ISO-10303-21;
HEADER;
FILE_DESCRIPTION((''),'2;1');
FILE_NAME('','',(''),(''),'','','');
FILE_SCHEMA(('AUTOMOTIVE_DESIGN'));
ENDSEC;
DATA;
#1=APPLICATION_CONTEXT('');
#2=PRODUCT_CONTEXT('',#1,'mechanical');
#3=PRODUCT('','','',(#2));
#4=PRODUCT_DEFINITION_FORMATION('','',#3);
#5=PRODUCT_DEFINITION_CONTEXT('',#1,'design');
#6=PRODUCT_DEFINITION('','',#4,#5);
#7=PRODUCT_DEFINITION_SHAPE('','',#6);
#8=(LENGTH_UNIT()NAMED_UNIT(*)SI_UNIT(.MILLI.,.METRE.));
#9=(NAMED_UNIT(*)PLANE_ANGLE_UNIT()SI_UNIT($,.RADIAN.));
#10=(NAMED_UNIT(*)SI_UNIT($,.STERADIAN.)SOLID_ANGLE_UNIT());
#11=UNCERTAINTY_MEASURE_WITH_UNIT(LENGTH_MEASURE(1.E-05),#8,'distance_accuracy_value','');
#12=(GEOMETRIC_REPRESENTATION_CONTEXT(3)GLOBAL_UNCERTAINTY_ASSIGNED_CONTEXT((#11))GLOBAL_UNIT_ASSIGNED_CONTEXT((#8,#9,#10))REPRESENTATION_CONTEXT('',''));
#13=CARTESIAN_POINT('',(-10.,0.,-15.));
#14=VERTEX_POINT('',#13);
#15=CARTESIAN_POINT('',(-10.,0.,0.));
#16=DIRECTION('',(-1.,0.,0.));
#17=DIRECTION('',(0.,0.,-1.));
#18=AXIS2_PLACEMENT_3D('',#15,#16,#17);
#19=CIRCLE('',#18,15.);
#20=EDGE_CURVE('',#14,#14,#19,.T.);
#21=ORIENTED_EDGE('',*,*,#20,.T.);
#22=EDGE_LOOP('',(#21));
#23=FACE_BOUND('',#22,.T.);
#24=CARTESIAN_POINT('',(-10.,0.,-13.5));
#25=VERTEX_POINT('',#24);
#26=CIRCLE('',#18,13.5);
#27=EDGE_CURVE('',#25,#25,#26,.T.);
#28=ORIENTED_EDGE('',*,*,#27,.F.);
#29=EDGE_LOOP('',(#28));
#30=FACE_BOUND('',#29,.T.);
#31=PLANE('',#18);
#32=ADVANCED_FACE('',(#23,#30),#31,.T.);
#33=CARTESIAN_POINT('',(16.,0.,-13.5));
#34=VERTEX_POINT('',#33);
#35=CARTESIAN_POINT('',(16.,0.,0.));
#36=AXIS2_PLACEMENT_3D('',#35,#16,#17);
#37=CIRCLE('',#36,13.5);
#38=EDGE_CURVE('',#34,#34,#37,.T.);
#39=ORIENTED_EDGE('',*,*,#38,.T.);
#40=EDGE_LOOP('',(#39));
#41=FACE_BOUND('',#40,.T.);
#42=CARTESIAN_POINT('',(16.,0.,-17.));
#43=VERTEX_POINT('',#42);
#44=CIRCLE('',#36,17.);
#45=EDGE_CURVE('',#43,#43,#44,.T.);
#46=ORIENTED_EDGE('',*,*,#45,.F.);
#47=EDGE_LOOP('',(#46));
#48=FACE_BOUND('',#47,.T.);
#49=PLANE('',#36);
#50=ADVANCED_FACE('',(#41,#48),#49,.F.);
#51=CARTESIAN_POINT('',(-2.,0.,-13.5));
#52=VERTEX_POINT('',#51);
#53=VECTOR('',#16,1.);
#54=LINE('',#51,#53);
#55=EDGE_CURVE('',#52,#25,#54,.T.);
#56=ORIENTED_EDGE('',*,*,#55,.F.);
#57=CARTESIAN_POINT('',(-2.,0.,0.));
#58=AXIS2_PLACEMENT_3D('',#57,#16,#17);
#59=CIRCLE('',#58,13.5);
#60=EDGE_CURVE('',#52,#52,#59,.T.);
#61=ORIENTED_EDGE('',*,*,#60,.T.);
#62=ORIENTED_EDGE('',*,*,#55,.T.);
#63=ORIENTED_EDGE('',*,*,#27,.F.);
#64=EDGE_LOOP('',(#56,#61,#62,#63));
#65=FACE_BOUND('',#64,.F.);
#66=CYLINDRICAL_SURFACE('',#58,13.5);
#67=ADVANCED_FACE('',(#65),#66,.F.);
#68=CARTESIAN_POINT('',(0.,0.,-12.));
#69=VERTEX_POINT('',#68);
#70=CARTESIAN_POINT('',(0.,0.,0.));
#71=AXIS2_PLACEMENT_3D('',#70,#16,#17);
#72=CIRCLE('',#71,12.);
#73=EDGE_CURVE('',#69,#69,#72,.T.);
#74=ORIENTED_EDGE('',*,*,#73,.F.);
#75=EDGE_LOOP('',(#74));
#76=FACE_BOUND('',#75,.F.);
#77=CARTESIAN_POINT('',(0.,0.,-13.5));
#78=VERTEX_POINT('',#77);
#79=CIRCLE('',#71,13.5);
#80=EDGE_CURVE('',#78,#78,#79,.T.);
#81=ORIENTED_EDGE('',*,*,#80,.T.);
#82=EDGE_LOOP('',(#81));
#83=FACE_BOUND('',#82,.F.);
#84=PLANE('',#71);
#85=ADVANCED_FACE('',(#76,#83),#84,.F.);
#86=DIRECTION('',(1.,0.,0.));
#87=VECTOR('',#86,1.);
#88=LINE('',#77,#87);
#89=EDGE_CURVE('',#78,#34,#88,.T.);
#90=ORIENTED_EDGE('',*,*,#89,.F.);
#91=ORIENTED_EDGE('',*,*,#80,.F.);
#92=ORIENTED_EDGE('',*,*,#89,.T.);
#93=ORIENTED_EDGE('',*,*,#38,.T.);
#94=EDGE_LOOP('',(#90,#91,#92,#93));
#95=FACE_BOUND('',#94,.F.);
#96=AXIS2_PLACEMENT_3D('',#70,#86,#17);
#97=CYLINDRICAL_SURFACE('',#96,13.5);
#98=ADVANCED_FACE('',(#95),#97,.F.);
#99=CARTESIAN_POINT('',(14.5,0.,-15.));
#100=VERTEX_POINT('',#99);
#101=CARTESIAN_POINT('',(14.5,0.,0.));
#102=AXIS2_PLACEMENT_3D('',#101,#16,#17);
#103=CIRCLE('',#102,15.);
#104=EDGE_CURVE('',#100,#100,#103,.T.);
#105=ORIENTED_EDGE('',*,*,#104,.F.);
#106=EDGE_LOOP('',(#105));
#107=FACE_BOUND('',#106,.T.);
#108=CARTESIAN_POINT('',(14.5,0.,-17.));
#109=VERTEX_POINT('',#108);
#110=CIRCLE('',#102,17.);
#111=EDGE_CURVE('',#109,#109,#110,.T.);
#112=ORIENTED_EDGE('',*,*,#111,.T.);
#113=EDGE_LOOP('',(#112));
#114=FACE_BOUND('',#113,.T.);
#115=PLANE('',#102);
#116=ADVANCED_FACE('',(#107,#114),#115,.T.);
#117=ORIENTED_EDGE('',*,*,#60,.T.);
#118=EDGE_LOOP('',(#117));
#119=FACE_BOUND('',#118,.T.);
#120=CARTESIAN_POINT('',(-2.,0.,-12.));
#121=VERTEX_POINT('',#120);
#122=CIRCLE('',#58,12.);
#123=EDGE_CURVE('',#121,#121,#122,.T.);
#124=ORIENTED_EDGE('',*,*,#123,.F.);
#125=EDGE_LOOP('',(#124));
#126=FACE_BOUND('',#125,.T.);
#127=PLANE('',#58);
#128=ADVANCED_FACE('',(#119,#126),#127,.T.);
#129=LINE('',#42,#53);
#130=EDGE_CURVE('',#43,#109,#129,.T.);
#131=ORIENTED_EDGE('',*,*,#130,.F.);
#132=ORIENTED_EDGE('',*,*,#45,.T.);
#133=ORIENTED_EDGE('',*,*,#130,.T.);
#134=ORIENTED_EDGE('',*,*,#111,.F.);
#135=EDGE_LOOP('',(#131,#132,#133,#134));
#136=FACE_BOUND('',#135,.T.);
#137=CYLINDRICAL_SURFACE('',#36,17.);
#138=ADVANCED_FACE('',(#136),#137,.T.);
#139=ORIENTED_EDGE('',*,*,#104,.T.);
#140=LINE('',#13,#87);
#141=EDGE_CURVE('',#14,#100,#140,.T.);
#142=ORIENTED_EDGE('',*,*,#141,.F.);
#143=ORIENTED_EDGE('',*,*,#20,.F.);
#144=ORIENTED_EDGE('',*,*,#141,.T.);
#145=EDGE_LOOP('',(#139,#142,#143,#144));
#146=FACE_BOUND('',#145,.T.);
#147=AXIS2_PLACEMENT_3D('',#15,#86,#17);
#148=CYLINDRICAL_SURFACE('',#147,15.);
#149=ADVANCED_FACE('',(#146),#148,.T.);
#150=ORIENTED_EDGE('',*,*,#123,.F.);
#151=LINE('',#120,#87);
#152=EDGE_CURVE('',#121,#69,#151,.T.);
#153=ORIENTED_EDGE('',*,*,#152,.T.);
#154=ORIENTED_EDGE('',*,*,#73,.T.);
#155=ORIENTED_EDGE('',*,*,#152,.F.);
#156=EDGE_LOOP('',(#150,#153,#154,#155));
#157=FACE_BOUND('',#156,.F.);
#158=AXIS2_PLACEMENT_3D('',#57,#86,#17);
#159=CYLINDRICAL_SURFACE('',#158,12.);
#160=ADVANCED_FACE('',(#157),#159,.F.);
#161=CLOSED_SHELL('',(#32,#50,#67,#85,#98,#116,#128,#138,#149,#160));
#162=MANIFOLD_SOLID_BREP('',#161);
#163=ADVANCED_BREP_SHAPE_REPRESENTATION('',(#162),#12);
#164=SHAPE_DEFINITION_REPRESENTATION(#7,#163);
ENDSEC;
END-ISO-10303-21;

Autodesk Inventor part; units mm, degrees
ref_plane "YZ Plane" through (0, 0, 0) normal (1, 0, 0) x (0, 1, 0)
ref_plane "XZ Plane" through (0, 0, 0) normal (0, 1, 0) x (-1, 0, 0)
ref_plane "XY Plane" through (0, 0, 0) normal (0, 0, 1) x (1, 0, 0)
sketch "Sketch1" plane through (0, 0, 0) normal (0, 1, 0) x (-1, 0, 0)
  line L0 (0, 0) -> (10, 0)
  line L1 (2, -13.5) -> (10, -13.5)
  line L2 (2, -13.5) -> (2, -12)
  line L3 (2, -12) -> (0, -12)
  line L4 (10, -15) -> (10, -13.5)
  line L5 (0, -13.5) -> (-16, -13.5)
  line L6 (0, -13.5) -> (0, -12)
  line L7 (-16, -13.5) -> (-16, -17)
  line L8 (-16, -17) -> (-14.5, -17)
  line L9 (-14.5, -17) -> (-14.5, -15)
  line L10 (10, -15) -> (-14.5, -15)
  dimension "d0" = 1.5
  dimension "d4" = 1.5
  dimension "d5" = 10
  dimension "d7" = 24
  dimension "d8" = 27
  dimension "d11" = 16
  dimension "d12" = 27
  dimension "d13" = 1.5
  dimension "d14" = 34
  dimension "d16" = 2
revolve "Revolution1" add sketch "Sketch1" angle 360 about axis through (0, 0, 0) along (-1, 0, 0)
thread "Thread1" size "M30x1" class "6g" standard "ANSI Metric M Profile" length 5
properties part number "030" material "Aluminum 6061"
